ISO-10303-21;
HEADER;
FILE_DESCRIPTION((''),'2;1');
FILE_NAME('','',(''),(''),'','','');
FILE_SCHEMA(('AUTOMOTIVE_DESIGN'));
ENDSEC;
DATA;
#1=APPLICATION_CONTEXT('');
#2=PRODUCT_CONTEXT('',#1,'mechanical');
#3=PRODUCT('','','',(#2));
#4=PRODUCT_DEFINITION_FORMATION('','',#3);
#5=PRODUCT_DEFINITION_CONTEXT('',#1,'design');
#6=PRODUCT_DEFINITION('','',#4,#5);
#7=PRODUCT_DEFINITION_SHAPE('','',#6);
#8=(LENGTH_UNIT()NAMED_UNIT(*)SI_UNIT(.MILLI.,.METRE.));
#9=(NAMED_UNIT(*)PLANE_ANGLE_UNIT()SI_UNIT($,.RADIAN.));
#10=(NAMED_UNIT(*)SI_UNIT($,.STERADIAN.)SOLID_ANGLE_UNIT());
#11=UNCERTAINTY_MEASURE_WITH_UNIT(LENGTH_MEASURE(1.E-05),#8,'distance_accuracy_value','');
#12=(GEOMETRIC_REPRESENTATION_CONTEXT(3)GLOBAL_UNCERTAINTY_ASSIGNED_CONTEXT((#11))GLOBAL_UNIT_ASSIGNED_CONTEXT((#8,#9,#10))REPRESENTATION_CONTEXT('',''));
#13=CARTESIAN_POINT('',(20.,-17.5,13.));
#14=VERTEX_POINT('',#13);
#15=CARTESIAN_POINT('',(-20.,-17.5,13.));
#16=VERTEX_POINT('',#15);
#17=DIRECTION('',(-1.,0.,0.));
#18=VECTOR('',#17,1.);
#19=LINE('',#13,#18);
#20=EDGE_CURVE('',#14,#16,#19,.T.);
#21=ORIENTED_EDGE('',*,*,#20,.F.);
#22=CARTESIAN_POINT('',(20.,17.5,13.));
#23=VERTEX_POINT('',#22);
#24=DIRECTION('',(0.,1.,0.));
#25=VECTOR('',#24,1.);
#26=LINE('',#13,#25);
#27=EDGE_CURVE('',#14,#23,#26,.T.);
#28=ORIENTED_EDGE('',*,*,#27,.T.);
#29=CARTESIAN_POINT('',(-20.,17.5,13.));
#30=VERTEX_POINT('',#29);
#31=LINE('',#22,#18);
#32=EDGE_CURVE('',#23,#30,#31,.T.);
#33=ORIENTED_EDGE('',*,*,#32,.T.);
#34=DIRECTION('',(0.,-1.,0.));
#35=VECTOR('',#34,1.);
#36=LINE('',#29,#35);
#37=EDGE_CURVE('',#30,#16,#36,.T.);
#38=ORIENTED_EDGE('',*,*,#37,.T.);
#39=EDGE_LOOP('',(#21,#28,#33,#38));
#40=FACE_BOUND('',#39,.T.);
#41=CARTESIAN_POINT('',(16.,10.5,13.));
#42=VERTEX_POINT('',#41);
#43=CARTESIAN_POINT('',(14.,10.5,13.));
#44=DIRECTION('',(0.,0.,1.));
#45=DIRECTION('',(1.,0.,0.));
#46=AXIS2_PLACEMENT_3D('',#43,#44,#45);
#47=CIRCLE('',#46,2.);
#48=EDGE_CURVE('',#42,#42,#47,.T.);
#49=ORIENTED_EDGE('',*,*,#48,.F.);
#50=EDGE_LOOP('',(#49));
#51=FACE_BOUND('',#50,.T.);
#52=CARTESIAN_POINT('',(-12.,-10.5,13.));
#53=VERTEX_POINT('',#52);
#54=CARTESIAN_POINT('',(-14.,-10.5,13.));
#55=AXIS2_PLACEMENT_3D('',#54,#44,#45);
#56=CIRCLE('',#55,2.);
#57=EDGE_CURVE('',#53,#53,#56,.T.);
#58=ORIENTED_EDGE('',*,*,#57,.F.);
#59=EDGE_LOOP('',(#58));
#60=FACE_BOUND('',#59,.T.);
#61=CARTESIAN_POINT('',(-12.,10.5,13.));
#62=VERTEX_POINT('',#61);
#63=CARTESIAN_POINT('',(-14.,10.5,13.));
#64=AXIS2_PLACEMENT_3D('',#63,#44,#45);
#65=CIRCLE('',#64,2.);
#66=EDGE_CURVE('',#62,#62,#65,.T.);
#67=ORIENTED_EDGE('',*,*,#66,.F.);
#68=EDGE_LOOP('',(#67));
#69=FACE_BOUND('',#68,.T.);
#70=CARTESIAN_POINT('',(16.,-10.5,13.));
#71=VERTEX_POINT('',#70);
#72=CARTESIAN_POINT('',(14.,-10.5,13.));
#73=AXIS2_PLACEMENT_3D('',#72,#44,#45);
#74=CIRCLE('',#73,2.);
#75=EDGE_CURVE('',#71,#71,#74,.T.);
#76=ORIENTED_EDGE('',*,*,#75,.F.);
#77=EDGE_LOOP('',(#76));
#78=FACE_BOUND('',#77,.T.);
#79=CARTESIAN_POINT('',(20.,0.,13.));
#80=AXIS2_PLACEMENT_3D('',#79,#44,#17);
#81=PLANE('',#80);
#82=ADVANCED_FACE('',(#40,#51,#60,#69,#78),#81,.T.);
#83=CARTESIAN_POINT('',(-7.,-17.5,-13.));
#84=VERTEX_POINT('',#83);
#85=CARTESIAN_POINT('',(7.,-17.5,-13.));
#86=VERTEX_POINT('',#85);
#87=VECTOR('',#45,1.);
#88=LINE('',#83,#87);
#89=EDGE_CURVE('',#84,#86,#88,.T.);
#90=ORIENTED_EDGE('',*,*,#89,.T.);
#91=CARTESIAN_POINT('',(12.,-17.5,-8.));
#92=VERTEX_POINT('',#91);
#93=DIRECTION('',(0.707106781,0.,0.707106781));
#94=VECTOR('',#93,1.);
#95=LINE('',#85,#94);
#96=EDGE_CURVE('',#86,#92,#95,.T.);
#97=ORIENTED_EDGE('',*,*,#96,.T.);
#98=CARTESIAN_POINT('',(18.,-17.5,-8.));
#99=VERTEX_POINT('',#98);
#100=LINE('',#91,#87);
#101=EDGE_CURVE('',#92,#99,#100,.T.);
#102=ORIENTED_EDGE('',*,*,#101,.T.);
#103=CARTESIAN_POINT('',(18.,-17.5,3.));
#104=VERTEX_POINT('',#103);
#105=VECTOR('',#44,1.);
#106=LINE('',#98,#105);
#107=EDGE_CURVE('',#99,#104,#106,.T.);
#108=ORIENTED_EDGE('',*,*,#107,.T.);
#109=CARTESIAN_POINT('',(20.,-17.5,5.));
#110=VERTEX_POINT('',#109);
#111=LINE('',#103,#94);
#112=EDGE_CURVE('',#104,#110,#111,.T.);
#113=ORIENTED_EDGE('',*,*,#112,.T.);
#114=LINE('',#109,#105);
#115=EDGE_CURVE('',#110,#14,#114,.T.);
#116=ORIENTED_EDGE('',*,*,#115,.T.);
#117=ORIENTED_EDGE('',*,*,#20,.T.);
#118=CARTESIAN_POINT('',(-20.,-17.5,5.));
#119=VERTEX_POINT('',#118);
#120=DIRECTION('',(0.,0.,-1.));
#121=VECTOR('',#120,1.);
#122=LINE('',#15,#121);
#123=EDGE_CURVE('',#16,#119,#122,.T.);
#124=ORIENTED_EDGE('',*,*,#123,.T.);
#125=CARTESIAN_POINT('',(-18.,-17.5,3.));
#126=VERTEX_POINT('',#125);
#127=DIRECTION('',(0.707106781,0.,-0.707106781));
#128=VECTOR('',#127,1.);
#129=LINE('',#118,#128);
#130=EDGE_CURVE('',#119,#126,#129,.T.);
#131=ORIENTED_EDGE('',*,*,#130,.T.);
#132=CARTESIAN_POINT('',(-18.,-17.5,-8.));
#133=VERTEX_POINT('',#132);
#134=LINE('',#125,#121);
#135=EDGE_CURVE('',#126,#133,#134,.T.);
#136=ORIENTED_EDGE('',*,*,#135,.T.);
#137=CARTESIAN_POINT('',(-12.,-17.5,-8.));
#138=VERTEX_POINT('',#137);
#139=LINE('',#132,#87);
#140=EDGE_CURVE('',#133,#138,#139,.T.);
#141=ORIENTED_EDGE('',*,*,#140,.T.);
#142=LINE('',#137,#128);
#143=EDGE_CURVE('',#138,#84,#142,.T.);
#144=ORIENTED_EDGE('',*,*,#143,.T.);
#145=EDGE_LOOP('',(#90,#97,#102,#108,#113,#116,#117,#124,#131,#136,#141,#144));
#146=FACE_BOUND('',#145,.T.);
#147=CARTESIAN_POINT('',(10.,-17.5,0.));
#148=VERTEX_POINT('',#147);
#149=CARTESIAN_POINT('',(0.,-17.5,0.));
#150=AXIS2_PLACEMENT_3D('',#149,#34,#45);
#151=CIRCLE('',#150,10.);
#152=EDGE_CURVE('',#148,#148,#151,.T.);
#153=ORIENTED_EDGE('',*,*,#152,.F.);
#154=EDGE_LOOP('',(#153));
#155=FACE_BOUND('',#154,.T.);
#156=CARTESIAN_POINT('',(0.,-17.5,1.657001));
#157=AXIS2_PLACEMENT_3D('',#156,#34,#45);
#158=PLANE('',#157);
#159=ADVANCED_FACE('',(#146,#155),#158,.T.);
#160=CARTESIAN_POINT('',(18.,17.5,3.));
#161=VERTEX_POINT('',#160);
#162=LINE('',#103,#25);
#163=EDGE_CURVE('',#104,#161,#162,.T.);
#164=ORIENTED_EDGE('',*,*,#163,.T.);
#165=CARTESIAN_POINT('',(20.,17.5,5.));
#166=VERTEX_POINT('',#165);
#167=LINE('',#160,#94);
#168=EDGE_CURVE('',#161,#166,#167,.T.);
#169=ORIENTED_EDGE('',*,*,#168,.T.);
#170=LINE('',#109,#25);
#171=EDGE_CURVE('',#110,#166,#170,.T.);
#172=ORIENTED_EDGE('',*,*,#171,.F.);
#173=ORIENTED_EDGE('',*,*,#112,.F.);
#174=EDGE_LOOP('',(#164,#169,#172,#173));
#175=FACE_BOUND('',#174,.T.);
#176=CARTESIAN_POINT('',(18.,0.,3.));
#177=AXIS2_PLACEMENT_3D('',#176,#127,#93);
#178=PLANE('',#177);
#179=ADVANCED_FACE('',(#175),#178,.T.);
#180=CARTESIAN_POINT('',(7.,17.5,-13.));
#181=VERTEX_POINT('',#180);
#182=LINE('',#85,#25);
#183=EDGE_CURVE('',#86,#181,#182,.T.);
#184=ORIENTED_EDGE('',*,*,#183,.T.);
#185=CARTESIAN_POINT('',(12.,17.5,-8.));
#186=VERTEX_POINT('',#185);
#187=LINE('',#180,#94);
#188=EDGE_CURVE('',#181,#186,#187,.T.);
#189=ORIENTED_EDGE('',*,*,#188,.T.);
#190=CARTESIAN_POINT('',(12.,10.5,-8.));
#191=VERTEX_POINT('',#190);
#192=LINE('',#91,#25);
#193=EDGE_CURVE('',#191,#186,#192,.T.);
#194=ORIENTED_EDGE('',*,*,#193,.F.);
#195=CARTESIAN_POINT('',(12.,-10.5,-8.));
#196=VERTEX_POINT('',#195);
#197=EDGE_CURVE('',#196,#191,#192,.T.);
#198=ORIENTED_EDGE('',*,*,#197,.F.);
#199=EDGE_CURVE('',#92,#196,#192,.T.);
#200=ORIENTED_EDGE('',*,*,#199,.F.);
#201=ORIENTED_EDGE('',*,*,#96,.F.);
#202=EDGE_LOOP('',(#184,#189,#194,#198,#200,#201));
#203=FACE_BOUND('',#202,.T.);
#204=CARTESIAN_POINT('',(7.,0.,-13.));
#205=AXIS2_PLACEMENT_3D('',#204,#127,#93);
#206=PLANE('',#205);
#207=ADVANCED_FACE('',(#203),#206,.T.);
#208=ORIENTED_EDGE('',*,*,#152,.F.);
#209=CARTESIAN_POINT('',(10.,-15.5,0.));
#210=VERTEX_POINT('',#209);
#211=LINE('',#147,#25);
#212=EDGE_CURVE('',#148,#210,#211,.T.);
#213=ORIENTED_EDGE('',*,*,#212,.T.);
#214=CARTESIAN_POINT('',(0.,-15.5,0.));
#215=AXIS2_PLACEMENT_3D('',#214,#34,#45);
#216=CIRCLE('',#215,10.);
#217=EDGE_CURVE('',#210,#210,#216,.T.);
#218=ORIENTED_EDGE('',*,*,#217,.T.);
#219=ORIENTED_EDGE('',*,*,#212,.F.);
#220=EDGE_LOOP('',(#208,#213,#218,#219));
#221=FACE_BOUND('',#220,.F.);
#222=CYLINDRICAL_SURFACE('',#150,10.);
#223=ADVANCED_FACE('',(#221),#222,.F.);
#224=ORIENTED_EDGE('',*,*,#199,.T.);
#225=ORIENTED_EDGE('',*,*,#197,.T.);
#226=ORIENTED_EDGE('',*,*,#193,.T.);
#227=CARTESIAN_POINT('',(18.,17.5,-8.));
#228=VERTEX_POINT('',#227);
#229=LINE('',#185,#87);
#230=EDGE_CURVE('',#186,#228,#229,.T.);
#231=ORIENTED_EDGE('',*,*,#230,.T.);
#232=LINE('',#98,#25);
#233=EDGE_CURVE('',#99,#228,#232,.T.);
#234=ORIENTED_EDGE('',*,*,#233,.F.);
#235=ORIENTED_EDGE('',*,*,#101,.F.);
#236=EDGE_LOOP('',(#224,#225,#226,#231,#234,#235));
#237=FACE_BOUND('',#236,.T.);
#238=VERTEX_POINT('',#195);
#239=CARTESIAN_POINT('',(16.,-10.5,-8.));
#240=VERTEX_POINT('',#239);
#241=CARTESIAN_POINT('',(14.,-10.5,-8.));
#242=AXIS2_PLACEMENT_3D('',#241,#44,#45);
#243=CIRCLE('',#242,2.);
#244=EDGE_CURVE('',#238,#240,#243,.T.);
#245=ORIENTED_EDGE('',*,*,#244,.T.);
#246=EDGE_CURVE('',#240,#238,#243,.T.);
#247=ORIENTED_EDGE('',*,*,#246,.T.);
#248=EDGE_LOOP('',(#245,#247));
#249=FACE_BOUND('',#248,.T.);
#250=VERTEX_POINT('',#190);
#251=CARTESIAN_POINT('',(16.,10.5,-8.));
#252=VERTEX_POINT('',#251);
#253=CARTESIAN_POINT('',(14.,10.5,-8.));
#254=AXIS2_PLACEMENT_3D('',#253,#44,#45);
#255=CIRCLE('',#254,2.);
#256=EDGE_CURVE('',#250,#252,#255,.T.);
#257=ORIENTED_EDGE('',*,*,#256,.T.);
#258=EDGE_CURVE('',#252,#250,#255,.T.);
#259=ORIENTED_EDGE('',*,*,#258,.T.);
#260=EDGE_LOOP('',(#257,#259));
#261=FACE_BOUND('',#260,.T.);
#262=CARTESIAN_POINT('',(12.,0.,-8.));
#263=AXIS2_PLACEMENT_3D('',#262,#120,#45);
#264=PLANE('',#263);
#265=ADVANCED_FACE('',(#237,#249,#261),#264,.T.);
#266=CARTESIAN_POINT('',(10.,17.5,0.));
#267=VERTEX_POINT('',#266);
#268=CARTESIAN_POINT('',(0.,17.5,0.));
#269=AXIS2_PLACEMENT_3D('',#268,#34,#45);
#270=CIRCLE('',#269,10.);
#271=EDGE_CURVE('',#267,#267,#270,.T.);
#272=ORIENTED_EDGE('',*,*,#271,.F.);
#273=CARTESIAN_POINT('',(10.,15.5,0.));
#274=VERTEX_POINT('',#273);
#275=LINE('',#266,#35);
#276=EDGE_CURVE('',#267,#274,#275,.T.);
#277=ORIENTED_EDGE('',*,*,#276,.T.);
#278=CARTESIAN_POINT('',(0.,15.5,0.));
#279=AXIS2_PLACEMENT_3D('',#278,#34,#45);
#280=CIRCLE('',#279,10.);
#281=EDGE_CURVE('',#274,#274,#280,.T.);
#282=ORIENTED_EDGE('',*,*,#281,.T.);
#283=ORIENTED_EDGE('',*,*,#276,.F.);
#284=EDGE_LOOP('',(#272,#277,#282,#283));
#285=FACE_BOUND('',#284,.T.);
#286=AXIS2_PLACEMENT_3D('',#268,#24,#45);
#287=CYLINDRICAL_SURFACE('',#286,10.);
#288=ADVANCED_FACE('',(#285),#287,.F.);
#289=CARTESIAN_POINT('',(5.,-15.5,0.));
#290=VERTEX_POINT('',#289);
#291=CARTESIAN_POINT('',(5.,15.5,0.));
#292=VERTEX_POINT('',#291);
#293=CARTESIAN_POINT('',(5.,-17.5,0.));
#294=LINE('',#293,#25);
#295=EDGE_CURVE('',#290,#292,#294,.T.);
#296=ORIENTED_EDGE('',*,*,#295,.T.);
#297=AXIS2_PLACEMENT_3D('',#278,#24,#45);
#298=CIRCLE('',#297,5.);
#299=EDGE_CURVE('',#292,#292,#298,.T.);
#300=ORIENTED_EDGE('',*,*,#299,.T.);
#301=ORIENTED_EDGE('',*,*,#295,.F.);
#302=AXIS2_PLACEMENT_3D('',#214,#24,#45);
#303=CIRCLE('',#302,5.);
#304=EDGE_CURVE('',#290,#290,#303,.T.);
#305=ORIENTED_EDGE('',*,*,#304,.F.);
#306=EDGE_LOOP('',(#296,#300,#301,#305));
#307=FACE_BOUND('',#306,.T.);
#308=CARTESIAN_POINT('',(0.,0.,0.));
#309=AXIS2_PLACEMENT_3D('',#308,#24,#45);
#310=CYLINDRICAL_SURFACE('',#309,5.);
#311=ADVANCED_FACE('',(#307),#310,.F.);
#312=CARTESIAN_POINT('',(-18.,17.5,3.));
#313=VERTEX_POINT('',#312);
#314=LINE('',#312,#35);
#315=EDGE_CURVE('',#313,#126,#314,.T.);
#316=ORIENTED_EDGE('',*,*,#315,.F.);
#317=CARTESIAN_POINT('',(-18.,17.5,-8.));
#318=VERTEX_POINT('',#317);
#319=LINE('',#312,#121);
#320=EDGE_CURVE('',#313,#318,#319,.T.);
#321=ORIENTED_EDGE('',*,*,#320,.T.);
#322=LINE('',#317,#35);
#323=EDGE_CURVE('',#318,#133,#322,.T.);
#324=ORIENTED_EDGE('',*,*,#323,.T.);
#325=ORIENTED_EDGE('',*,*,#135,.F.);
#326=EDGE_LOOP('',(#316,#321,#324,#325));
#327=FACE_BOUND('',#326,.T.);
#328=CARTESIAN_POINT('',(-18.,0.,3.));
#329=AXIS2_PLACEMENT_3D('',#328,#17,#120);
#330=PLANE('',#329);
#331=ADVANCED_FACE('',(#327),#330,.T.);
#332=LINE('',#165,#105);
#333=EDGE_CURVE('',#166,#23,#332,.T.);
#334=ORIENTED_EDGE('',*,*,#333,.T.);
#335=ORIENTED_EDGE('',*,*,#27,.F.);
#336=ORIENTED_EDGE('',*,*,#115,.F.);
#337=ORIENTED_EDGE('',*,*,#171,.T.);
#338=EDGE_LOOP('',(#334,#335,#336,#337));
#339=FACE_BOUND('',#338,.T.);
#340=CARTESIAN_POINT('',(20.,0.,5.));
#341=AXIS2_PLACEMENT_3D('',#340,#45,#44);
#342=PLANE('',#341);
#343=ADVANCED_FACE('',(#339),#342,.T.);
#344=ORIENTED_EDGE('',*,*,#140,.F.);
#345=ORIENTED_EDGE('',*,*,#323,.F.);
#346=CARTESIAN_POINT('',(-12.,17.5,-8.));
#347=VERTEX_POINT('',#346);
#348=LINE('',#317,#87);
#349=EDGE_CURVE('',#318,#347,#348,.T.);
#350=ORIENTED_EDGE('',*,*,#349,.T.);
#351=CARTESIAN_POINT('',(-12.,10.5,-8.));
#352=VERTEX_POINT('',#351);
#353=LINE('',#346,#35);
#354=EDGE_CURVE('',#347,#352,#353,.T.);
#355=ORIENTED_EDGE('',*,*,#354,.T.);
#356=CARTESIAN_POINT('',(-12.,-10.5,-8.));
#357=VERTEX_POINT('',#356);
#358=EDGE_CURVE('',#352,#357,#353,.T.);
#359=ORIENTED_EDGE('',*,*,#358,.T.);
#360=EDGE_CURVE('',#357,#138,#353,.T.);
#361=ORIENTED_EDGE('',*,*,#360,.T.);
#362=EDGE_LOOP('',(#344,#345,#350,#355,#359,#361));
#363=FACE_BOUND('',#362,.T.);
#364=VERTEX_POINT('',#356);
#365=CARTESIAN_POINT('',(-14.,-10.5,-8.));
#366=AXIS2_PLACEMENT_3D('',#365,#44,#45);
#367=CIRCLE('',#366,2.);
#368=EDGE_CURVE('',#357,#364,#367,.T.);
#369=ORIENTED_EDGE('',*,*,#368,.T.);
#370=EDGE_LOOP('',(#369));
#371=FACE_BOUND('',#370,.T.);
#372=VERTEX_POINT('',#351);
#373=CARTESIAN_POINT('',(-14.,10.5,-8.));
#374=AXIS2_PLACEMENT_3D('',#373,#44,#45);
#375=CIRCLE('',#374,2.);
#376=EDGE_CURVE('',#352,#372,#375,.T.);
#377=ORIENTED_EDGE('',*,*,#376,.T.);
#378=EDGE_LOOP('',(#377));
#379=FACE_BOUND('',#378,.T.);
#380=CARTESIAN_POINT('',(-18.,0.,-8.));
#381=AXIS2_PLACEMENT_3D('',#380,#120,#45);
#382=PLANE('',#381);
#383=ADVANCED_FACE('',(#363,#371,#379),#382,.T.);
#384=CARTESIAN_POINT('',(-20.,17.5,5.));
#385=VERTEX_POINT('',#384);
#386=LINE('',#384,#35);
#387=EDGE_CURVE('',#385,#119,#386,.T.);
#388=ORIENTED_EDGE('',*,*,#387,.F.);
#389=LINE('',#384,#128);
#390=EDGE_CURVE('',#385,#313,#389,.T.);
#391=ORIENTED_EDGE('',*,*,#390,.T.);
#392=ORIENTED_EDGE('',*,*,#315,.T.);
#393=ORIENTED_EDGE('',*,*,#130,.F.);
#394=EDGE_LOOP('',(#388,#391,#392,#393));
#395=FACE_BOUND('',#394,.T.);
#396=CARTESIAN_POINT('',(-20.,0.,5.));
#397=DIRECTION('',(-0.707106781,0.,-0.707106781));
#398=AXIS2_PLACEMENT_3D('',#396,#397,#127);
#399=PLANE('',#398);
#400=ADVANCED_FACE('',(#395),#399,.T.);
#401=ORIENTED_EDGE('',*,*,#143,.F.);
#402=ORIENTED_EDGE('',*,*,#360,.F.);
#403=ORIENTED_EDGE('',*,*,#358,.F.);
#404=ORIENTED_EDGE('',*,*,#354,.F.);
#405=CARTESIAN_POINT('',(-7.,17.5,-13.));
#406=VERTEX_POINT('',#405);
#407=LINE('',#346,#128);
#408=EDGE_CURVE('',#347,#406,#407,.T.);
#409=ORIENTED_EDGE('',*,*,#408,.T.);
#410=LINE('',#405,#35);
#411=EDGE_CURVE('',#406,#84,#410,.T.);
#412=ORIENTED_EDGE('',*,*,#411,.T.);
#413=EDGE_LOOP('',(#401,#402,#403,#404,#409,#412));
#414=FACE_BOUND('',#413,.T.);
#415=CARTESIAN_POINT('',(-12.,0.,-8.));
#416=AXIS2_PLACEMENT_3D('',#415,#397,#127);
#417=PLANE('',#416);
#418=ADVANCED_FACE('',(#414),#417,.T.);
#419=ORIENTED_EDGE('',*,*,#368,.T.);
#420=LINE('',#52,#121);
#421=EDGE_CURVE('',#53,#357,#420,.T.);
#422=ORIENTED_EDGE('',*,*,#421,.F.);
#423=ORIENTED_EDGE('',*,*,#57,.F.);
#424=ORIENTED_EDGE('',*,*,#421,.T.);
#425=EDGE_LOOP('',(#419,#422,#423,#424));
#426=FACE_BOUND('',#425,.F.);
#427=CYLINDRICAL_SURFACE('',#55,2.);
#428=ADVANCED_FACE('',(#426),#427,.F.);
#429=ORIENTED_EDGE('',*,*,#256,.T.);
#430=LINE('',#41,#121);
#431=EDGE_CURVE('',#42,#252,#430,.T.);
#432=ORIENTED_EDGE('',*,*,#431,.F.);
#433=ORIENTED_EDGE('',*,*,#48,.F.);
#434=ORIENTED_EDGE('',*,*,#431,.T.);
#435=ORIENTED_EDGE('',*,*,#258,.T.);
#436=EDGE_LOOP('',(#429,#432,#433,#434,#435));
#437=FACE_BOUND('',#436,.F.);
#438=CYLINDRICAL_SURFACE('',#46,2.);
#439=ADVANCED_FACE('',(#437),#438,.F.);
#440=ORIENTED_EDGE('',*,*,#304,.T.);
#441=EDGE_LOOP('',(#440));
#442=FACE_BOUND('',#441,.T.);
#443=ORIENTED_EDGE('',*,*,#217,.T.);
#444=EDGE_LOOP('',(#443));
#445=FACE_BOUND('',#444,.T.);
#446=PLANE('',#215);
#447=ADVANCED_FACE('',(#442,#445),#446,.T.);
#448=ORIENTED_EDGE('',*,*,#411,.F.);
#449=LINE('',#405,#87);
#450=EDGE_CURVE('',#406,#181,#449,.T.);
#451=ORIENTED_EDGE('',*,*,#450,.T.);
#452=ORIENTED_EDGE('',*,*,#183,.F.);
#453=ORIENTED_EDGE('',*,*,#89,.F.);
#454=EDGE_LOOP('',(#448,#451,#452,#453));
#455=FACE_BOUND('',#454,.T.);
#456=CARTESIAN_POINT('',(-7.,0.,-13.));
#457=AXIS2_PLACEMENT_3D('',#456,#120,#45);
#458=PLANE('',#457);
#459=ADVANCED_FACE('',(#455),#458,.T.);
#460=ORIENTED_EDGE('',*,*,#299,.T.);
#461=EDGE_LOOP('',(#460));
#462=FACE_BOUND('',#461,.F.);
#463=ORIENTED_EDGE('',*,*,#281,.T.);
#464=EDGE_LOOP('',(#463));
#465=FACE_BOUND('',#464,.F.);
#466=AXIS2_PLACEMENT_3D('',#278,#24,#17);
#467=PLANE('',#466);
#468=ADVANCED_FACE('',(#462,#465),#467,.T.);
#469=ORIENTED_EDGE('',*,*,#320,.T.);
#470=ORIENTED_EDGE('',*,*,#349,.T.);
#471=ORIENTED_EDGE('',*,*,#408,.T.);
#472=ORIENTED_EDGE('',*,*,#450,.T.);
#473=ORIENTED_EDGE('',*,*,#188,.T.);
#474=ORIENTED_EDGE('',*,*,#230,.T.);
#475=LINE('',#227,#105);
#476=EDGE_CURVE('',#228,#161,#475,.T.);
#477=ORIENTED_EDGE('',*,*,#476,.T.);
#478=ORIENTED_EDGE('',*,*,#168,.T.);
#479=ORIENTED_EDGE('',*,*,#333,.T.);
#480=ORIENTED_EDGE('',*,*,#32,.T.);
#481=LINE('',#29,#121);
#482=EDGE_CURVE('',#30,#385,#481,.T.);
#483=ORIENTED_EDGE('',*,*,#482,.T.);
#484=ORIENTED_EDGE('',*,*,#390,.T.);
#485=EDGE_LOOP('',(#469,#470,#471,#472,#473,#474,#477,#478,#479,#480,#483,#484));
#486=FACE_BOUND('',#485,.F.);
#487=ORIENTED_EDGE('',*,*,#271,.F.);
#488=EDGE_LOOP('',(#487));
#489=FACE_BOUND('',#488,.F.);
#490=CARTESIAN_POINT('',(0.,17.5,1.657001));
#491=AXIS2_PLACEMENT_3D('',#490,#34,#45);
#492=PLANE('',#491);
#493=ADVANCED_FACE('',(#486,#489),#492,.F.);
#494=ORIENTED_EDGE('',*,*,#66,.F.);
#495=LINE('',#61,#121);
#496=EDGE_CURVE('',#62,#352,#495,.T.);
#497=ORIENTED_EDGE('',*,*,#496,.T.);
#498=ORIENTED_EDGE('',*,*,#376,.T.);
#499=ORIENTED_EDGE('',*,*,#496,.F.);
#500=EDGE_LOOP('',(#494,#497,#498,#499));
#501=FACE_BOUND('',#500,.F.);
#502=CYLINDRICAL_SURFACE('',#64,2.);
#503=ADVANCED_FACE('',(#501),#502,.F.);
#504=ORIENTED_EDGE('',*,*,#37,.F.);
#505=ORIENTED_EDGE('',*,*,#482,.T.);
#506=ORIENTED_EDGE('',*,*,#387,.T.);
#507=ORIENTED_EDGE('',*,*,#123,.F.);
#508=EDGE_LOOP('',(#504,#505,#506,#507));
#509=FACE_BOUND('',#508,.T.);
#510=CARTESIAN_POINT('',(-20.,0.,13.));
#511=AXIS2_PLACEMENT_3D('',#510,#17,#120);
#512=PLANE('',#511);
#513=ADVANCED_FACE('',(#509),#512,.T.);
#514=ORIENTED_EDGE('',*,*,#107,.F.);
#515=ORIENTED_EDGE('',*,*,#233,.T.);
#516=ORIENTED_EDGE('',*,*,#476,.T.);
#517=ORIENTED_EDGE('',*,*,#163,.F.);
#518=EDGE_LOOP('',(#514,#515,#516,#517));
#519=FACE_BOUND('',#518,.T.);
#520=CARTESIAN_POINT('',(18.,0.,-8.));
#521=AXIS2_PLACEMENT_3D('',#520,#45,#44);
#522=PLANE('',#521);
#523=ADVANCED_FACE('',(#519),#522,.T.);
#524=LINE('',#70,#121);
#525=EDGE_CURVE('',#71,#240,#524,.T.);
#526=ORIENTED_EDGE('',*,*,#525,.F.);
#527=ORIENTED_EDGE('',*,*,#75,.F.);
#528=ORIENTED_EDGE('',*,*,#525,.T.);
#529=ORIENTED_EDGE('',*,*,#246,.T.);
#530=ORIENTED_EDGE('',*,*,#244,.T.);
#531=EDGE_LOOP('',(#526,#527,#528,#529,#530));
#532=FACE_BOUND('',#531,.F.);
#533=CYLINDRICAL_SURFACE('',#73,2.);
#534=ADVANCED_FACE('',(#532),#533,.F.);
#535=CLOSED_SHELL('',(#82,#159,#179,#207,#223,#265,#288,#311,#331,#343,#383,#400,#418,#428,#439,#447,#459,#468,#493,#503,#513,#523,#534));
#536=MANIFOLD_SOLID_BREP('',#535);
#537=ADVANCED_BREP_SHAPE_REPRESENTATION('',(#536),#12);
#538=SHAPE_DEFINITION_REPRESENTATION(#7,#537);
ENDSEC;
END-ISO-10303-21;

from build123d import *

# Parameters (mm, degrees)
F0_R     = 5
F1_DEPTH = 17.5
F2_R     = 10
F3_DEPTH = 2
F4_R     = 2
F5_DEPTH = 25


# Not quite as in the source:
# - a pattern or mirror of a feature is missing from the dataset's text; its kind, count and spacing are read off the source's solid


with BuildPart() as f1:
    # F0 (on Front) → F1 (new body, symmetric)
    with BuildSketch(Plane.XZ):
        Polygon((20, 13), (0, 13), (-20, 13), (-20, 5), (-18, 3), (-18, -8), (-12, -8), (-7, -13), (0, -13), (7, -13), (12, -8), (18, -8), (18, 3), (20, 5), align=None)
        Circle(F0_R, mode=Mode.SUBTRACT)
    extrude(amount=F1_DEPTH, both=True)

    # F2 (on face) → F3 (cut)
    with BuildSketch(Plane.XZ.offset(17.5)):
        Circle(F2_R)
    f3 = extrude(amount=-F3_DEPTH, mode=Mode.SUBTRACT)

    # F3_copies: F3 across plane
    add(f3.mirror(Plane.ZX), mode=Mode.SUBTRACT)

    # F4 (on face) → F5 (cut)
    with BuildSketch(Plane.XY.offset(13)):
        with Locations((-14, 10.5)):
            Circle(F4_R)
        with Locations((-14, -10.5)):
            Circle(F4_R)
        with Locations((14, 10.5)):
            Circle(F4_R)
        with Locations((14, -10.5)):
            Circle(F4_R)
    extrude(amount=-F5_DEPTH, mode=Mode.SUBTRACT)


solid = f1.part
